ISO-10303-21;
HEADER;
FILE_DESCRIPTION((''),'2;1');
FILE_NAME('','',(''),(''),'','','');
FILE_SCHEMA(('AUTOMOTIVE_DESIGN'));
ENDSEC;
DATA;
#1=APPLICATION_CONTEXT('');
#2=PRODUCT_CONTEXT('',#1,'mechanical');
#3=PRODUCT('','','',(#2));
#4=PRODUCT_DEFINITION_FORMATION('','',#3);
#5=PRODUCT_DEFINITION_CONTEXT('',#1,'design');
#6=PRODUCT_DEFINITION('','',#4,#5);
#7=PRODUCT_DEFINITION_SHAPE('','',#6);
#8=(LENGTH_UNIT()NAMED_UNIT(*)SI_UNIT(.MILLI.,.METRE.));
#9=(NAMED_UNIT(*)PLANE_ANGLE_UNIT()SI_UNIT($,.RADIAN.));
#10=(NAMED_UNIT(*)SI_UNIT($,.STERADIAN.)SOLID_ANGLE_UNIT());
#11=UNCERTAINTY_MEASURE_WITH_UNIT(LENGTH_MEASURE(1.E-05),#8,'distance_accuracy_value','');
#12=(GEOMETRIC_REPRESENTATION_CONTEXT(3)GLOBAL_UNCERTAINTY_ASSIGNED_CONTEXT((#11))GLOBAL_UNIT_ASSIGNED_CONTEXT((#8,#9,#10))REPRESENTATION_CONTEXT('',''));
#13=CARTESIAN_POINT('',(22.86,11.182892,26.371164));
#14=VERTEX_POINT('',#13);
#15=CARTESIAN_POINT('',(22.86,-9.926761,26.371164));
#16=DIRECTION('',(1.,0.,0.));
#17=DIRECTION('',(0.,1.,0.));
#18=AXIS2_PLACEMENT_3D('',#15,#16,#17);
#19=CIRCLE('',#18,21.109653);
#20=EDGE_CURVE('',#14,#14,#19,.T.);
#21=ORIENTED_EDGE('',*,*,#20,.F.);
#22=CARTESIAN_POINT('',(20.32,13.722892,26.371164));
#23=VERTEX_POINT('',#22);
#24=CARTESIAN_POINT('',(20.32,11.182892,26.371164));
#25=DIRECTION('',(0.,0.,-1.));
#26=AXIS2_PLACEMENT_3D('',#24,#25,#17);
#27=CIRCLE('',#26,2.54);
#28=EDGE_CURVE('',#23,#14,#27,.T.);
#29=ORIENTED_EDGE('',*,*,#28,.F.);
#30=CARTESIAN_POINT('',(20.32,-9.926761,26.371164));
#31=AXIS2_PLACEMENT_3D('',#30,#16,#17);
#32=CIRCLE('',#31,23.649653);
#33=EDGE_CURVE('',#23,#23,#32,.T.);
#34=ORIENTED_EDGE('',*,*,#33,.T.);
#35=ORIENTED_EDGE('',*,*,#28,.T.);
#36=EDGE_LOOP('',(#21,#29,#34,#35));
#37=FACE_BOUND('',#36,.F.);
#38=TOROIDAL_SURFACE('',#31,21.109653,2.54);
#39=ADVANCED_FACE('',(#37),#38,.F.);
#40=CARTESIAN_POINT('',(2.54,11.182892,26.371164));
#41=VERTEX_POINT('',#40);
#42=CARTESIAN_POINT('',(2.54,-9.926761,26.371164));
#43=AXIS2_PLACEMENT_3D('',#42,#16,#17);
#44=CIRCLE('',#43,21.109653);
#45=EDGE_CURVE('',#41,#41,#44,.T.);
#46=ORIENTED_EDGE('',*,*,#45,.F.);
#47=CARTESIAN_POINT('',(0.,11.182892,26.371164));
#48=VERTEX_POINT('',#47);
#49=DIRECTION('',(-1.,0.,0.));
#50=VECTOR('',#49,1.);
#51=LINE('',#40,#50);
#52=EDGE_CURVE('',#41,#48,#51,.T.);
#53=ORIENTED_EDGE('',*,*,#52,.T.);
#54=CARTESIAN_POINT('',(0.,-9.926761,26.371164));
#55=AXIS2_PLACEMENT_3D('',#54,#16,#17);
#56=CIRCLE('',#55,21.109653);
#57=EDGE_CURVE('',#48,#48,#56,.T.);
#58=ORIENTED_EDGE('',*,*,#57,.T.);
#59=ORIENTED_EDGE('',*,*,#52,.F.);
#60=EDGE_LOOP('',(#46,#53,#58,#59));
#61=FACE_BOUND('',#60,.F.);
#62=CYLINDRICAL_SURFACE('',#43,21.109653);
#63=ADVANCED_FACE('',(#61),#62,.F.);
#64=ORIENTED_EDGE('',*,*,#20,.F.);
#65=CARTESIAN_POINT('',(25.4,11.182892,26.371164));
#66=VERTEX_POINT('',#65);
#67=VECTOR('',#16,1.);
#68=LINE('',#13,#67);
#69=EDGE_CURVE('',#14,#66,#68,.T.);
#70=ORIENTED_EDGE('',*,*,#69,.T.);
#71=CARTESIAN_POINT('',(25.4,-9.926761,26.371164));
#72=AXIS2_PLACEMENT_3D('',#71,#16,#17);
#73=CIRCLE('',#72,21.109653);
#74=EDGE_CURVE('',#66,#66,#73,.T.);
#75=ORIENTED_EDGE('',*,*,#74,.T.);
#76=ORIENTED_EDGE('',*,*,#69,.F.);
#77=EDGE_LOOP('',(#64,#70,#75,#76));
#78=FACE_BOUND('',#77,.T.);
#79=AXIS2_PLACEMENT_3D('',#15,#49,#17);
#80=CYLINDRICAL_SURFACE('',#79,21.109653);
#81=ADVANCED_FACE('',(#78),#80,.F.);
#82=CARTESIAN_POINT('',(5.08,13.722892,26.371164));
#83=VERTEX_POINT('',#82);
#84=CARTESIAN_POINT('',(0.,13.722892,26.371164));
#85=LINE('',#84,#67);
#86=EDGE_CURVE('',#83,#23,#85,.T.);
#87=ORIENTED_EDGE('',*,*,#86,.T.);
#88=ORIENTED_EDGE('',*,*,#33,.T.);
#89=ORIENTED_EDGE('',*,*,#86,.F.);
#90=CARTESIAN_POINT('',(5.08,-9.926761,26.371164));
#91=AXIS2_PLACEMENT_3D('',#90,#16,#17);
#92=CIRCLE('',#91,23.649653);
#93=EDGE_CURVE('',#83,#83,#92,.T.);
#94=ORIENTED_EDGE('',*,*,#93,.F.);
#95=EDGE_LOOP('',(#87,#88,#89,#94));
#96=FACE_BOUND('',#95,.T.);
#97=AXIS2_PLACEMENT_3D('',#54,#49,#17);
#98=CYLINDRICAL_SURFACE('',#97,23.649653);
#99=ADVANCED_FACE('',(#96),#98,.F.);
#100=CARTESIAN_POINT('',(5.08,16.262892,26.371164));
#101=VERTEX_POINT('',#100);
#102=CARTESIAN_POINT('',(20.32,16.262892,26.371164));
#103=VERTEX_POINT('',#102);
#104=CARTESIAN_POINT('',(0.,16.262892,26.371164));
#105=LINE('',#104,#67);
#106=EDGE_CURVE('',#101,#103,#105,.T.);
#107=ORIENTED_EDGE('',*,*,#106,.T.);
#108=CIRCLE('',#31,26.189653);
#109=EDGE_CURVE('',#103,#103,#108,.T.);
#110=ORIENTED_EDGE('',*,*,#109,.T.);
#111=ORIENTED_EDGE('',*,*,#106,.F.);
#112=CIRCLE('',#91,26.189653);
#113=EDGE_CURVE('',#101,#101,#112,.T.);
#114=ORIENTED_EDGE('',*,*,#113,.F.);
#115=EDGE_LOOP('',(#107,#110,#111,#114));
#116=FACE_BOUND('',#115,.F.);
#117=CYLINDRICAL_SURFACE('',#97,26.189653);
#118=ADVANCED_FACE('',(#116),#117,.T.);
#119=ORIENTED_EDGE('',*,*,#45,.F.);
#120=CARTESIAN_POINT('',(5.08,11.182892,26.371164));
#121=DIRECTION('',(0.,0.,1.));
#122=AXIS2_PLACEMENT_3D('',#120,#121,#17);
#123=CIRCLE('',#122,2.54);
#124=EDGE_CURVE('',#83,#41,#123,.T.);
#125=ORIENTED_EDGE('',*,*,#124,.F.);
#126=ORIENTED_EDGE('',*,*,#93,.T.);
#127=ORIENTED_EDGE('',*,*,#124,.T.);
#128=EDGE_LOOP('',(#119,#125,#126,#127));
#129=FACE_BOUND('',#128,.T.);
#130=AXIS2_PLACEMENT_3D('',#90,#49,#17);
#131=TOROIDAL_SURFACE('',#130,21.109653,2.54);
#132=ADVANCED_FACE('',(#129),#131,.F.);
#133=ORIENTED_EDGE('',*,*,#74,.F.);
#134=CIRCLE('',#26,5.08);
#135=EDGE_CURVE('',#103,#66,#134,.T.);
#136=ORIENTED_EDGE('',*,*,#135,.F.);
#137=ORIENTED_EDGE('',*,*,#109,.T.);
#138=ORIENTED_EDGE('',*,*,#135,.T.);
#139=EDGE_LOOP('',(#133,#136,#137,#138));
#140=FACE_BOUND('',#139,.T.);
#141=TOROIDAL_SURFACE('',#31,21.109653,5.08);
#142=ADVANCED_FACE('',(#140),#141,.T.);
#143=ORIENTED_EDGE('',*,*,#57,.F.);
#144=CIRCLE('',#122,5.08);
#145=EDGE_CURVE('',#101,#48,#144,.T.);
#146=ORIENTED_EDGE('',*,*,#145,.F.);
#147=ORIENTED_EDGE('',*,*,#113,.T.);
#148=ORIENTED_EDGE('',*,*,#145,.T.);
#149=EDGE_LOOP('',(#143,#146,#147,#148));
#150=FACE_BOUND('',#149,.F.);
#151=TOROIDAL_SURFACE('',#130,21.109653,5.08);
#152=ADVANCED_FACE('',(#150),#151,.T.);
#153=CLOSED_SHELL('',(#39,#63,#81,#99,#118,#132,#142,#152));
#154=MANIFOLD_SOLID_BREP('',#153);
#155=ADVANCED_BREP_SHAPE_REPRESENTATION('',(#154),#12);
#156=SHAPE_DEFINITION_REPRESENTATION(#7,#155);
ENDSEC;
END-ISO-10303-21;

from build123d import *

# Parameters (mm, degrees)
F0_R     = 26.1896529573
F1_DEPTH = 25.4
F2_R     = 5.08
F3_T     = -2.54


# Not quite as in the source:
# - a shell that OpenCascade refuses in one call is made with other operations: the cavity is built on its own and cut out


with BuildPart() as f1:
    # F0 (on Right) → F1 (new body)
    with BuildSketch(Plane.YZ):
        with Locations((-9.9267605692, 26.3711642474)):
            Circle(F0_R)
    extrude(amount=F1_DEPTH)

    # F2
    f2_edges = [f1.edges().sort_by_distance(p)[0] for p in [
        (25.4, -36.116414, 26.371164),
        (0, -36.116414, 26.371164),
        (12.7, 16.262892, 26.371164),
    ]]
    fillet(f2_edges, radius=F2_R)

    # F3: a shell. OpenCascade refuses it in one call, so the cavity is built on its own and cut out:
    # the body offset inwards by the wall thickness, plus a prism from it out through each open face.
    f3_core = offset(f1.part, amount=F3_T, mode=Mode.PRIVATE)
    f3_exits = [f3_core.faces().sort_by_distance(p)[0] for p in [
        (22.86, -9.926761, 26.371164),
        (2.54, -9.926761, 26.371164),
    ]]
    add(f3_core, mode=Mode.SUBTRACT)
    extrude(f3_exits, amount=-F3_T, mode=Mode.SUBTRACT)


solid = f1.part
